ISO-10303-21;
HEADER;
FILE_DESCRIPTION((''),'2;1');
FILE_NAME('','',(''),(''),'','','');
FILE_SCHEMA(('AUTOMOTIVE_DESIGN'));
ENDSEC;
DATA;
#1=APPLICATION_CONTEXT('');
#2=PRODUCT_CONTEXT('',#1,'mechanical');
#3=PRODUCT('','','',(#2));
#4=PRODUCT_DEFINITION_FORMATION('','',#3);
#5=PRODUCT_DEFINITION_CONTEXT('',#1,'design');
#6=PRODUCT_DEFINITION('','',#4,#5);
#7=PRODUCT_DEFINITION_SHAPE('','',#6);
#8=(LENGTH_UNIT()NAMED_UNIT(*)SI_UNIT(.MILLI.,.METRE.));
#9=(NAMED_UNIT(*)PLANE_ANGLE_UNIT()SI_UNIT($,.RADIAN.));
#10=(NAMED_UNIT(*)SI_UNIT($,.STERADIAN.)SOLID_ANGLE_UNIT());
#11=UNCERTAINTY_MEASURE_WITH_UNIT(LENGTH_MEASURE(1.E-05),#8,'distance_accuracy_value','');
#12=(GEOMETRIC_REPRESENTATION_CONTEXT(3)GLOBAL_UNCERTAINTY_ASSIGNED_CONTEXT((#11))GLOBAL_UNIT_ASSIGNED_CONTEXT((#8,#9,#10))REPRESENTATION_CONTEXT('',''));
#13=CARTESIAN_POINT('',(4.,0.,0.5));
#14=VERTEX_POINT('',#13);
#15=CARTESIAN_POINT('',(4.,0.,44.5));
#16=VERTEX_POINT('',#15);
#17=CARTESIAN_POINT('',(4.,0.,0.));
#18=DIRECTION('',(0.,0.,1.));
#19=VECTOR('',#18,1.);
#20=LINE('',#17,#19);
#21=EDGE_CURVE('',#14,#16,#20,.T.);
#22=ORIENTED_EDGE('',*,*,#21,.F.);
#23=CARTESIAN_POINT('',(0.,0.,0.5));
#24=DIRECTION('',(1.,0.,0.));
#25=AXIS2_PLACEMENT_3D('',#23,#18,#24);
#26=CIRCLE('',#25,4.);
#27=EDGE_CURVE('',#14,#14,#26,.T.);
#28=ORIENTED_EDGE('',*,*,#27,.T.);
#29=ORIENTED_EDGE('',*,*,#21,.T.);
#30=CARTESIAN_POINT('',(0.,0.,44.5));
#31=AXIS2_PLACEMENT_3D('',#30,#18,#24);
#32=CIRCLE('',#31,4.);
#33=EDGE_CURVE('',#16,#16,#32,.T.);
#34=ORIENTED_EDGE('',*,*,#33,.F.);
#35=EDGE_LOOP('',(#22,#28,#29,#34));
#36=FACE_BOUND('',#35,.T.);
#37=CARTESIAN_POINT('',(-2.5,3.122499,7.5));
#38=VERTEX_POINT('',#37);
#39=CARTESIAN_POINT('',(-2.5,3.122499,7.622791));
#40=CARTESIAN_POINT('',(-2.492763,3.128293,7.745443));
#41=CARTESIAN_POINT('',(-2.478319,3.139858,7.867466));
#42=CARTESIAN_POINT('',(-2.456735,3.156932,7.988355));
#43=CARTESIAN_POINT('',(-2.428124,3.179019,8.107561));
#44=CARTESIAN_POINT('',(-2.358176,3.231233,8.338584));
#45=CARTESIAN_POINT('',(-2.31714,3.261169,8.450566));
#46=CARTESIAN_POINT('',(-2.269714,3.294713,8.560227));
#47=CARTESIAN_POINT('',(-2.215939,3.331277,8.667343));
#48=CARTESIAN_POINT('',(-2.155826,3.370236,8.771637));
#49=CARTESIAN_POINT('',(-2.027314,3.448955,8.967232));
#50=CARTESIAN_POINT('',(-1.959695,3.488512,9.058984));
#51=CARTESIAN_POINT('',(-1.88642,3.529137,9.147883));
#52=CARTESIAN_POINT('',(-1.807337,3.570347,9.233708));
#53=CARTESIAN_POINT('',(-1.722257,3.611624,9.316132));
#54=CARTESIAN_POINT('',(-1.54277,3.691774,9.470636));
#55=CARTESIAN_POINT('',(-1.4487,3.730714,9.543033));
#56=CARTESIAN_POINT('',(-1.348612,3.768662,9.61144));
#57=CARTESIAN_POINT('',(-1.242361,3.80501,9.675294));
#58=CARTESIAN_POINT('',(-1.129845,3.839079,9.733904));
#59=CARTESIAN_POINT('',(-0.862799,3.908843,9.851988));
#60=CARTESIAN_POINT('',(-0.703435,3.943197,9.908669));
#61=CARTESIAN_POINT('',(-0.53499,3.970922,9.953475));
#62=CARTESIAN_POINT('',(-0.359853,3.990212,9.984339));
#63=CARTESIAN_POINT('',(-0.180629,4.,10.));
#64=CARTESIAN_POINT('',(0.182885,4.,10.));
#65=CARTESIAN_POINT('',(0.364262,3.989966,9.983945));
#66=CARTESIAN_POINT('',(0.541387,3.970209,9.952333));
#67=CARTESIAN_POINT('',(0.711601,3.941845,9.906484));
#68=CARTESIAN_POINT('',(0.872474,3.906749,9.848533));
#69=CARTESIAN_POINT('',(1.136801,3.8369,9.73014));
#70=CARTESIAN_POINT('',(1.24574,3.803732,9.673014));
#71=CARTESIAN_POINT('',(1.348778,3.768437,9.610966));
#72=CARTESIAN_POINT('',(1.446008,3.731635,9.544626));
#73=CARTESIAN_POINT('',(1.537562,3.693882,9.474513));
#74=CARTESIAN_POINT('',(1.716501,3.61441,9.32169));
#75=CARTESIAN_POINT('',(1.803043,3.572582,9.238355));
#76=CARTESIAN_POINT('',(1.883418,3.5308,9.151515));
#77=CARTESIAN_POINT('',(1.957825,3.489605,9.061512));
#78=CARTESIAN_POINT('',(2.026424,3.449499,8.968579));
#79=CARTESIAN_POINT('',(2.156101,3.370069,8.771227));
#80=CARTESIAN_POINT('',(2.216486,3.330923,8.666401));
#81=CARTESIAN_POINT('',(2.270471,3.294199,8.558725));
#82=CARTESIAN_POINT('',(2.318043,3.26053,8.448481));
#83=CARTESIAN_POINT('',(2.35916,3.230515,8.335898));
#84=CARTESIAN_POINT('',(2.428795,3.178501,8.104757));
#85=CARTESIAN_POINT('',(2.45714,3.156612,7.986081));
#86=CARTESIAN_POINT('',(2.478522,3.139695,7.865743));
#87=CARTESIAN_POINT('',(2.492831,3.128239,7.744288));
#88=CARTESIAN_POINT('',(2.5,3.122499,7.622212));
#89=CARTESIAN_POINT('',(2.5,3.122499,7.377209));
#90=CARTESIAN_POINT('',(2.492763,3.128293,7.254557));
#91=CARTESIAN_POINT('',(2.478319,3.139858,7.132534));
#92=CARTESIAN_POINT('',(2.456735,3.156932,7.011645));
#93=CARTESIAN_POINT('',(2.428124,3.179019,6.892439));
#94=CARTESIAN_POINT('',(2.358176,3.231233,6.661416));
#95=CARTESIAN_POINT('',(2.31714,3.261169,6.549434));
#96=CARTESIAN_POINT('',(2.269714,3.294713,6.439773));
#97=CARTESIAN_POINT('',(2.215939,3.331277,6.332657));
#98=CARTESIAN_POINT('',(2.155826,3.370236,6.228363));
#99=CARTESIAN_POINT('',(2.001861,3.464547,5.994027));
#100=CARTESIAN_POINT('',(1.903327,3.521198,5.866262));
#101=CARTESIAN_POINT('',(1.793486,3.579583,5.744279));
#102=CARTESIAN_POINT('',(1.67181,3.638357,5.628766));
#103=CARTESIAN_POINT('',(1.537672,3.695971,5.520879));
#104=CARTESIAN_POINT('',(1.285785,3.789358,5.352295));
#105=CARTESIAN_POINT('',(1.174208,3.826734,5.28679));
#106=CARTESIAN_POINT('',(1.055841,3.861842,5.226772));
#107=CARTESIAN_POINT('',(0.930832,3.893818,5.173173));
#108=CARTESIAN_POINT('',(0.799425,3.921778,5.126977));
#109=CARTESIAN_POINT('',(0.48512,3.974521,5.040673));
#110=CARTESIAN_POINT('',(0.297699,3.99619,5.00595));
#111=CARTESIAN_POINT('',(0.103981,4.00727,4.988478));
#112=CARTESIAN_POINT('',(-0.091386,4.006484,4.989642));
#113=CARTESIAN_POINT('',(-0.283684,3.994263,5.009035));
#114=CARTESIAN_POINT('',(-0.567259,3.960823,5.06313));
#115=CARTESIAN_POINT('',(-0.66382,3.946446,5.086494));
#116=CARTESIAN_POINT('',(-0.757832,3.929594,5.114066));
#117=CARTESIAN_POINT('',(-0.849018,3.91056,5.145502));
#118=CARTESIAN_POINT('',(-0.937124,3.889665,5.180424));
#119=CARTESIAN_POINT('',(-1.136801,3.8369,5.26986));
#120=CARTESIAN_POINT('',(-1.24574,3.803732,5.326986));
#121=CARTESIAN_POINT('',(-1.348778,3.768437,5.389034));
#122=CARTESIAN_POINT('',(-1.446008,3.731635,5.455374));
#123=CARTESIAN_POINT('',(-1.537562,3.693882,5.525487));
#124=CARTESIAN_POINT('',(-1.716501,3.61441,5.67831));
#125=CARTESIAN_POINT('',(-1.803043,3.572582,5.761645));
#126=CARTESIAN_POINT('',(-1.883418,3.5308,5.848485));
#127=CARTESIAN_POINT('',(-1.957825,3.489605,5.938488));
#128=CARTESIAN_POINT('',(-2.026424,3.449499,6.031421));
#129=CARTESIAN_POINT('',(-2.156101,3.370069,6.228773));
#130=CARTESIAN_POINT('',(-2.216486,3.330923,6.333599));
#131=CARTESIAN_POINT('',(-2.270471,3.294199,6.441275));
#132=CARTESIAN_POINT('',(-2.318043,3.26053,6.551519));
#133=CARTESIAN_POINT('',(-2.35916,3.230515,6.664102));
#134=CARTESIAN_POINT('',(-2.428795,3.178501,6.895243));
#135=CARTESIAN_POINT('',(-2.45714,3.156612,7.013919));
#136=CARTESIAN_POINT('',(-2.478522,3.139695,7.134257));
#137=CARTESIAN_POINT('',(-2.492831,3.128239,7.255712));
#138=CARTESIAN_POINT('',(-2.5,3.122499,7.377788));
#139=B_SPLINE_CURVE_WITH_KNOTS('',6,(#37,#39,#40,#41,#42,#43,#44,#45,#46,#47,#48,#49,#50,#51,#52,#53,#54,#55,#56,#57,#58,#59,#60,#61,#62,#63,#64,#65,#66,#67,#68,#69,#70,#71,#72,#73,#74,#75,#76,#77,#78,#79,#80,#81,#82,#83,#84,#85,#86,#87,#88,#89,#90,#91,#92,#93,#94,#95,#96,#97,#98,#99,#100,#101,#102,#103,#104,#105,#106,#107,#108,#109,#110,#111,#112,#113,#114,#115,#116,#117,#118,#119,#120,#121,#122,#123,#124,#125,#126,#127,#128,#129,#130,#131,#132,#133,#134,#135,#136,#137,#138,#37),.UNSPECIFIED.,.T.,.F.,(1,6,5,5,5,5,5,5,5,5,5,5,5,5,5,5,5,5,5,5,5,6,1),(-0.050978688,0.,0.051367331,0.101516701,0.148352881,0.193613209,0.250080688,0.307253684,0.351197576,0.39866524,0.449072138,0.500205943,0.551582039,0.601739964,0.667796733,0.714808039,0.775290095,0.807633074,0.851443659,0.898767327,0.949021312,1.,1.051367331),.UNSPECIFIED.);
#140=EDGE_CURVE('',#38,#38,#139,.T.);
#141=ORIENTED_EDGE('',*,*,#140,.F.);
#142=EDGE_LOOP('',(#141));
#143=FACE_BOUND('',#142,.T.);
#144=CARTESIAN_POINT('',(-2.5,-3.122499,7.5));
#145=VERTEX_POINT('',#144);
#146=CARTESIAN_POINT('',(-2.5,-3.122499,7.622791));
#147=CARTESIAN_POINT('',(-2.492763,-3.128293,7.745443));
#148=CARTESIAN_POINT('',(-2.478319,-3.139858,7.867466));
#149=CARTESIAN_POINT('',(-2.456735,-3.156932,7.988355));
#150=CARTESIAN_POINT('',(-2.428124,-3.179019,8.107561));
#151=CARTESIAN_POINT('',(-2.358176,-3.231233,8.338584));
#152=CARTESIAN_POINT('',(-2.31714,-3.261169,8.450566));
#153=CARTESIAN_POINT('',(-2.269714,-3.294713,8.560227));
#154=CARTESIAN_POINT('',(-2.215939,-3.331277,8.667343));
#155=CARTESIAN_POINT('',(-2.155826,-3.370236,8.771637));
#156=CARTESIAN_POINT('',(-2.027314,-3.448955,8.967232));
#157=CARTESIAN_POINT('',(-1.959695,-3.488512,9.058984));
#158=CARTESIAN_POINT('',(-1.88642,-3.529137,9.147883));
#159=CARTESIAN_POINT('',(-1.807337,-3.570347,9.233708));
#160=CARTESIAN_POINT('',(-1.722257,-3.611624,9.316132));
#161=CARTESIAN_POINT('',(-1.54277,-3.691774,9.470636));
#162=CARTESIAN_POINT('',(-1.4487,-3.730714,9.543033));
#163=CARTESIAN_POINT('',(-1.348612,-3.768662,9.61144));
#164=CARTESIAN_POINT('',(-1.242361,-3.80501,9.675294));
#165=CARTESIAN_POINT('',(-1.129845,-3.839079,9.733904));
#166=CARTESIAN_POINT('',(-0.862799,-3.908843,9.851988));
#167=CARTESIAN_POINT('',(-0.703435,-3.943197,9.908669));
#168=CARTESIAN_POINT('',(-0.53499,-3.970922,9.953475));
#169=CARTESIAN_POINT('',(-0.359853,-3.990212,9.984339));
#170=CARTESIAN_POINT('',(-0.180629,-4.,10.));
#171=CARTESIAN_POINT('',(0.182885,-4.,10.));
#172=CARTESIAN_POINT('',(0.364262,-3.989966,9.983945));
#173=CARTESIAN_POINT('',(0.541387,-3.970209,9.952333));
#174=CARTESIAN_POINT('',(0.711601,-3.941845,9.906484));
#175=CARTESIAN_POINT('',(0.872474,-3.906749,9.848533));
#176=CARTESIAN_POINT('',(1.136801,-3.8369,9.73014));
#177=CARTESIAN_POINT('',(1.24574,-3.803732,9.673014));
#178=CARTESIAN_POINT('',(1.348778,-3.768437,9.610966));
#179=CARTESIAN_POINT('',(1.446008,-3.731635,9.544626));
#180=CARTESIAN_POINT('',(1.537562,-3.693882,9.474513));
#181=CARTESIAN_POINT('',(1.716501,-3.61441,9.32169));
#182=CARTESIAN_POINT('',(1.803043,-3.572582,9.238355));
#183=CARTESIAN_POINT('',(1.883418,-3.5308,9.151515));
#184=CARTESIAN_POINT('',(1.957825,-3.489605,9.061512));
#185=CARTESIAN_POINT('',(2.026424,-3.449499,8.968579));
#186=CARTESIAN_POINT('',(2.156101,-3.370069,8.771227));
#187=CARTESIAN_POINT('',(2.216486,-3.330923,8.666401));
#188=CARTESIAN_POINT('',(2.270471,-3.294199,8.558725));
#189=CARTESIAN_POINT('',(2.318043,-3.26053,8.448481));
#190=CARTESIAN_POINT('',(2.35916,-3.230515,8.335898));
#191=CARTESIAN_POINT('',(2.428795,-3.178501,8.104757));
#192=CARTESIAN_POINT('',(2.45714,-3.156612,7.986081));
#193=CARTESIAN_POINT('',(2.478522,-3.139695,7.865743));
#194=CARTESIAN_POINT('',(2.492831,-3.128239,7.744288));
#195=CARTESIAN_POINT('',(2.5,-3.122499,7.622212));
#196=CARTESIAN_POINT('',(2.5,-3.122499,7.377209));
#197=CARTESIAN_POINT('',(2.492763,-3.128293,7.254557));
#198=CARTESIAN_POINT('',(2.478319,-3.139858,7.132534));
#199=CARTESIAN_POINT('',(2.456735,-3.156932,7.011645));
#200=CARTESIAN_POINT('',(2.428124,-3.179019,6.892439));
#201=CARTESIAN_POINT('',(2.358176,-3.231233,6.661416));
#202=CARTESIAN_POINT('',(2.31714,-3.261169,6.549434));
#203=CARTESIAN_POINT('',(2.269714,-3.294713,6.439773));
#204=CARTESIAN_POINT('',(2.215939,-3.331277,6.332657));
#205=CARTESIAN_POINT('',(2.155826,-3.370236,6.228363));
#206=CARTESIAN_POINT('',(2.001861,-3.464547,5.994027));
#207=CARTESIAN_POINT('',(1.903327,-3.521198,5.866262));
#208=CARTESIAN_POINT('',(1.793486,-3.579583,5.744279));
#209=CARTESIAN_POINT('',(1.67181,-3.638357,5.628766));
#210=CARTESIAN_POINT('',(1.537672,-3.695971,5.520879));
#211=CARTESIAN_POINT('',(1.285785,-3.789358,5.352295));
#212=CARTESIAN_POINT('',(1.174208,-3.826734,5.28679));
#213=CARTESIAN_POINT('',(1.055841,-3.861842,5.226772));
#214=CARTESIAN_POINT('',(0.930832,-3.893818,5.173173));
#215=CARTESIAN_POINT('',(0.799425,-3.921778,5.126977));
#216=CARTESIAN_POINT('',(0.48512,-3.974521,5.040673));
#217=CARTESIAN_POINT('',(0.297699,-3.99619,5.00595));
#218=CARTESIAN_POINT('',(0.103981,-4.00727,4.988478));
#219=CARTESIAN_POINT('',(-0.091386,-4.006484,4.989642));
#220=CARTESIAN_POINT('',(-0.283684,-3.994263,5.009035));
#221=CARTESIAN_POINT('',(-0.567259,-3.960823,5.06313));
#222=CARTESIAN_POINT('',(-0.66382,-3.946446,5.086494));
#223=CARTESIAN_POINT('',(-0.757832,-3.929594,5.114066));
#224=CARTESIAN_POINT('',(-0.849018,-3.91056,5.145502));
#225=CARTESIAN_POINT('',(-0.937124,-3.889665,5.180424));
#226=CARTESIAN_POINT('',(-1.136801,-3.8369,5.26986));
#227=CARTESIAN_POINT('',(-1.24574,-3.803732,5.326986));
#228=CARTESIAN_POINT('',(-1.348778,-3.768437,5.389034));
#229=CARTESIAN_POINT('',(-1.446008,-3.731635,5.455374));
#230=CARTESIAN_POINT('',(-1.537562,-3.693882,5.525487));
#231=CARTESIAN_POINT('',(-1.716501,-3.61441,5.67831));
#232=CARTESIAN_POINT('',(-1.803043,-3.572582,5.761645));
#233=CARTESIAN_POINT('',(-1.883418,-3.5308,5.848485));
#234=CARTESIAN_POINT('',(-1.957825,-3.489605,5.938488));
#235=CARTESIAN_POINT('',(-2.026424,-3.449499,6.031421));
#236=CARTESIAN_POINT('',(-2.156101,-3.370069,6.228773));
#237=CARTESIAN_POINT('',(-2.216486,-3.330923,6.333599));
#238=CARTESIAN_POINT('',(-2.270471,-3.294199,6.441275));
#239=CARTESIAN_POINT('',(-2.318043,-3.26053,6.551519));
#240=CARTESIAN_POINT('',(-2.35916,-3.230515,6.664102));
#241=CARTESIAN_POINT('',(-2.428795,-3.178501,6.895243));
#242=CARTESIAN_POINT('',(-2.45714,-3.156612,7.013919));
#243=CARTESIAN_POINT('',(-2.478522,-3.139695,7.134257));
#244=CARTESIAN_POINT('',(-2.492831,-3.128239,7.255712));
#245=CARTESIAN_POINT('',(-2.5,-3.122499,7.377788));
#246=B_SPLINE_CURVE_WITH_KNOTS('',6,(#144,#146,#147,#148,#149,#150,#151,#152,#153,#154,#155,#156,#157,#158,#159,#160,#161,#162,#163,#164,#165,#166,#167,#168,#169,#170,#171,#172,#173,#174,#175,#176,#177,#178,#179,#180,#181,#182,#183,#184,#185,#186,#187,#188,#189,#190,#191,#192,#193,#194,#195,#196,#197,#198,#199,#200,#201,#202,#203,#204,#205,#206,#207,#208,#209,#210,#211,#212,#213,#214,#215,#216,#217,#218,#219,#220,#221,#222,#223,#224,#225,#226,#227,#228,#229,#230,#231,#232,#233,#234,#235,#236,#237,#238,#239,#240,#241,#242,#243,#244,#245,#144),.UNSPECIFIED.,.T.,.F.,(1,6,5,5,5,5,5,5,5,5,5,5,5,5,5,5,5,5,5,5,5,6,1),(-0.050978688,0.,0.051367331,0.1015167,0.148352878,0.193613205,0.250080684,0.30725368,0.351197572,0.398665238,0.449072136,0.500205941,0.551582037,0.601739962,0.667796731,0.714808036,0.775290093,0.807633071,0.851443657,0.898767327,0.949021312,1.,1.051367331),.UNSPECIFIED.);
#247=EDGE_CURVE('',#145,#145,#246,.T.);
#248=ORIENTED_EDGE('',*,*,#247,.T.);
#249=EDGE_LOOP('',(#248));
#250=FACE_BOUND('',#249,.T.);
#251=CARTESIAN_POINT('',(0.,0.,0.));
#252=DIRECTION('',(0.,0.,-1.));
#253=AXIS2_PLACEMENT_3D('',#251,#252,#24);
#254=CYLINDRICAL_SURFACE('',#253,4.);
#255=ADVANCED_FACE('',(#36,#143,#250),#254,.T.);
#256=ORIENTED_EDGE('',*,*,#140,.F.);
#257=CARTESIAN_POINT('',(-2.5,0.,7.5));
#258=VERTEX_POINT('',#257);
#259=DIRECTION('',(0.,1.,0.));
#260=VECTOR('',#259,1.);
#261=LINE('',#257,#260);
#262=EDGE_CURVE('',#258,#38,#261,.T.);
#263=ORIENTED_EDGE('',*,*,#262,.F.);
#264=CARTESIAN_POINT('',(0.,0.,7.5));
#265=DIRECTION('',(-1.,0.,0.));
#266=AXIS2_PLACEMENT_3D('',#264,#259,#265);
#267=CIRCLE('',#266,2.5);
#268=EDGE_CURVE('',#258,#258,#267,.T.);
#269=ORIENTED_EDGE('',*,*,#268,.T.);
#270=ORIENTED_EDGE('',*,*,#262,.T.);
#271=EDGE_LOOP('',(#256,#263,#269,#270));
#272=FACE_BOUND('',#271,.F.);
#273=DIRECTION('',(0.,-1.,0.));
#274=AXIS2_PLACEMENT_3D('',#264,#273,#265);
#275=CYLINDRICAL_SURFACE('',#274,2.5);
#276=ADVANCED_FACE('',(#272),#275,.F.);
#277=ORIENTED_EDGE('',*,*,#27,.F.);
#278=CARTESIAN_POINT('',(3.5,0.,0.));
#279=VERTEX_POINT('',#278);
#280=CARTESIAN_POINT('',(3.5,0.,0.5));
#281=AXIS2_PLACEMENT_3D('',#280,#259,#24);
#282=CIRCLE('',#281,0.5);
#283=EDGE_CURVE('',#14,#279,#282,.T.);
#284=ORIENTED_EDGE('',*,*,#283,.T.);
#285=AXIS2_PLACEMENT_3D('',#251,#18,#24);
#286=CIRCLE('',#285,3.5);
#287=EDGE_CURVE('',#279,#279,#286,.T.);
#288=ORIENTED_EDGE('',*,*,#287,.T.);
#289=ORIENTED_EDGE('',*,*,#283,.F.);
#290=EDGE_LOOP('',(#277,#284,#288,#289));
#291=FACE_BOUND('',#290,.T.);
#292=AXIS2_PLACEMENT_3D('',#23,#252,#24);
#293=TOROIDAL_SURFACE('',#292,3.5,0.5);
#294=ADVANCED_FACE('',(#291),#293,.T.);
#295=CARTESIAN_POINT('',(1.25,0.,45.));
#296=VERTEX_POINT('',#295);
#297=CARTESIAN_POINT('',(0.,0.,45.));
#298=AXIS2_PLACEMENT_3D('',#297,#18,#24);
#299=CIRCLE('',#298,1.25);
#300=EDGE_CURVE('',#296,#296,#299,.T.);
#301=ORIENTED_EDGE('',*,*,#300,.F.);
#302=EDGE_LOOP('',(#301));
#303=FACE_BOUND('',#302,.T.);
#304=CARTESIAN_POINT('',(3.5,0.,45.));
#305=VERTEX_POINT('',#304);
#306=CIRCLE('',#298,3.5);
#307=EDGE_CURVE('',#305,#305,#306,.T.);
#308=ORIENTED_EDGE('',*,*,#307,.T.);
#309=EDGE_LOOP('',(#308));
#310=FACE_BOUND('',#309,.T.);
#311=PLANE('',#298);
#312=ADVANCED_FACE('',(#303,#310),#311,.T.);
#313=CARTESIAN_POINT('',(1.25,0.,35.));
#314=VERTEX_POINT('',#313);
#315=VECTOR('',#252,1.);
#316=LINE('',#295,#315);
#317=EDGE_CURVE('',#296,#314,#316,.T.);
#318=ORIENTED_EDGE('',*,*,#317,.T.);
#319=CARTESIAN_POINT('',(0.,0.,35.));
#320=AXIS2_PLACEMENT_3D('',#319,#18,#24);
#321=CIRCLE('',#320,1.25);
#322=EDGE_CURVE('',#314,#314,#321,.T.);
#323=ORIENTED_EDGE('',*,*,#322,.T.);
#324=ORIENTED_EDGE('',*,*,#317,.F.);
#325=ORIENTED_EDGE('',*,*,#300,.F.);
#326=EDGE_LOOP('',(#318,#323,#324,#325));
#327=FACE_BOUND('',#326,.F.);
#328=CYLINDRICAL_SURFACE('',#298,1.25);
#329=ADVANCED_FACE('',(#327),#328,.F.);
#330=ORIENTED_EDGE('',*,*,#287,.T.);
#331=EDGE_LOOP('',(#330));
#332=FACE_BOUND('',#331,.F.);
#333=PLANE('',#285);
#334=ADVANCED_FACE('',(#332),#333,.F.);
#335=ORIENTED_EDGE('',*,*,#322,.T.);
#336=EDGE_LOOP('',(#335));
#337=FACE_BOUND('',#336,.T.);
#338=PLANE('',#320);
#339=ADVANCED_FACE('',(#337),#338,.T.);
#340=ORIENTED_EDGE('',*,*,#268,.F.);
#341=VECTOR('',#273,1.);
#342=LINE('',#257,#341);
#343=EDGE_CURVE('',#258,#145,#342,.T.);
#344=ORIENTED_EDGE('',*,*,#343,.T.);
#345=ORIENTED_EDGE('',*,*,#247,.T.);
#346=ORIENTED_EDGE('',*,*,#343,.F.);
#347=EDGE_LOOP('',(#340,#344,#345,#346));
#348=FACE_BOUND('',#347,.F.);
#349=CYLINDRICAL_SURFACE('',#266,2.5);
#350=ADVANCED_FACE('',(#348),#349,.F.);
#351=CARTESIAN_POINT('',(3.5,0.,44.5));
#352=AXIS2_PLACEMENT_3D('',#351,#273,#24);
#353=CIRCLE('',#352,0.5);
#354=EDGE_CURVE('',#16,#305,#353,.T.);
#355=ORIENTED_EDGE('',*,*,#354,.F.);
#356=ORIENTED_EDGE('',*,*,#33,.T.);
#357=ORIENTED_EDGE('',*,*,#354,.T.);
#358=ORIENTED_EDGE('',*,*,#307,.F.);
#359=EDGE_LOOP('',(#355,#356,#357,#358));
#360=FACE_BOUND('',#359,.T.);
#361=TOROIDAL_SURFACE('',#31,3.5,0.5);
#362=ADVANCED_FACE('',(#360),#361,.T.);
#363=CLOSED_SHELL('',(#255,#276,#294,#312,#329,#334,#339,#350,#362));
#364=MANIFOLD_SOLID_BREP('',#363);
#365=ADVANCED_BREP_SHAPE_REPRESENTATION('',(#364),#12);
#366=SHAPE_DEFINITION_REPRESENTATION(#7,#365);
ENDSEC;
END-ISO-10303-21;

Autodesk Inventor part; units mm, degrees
ref_plane "YZ Plane" through (0, 0, 0) normal (1, 0, 0) x (0, 1, 0)
ref_plane "XZ Plane" through (0, 0, 0) normal (0, 1, 0) x (-1, 0, 0)
ref_plane "XY Plane" through (0, 0, 0) normal (0, 0, 1) x (1, 0, 0)
sketch "Sketch1" plane through (0, 0, 0) normal (0, 0, 1) x (1, 0, 0)
  circle A0 centre (0, 0) radius 4
  dimension "d0" = 8
extrude "Extrusion1" add sketch "Sketch1" along normal blind 45
sketch "Sketch2" plane through (0, 0, 45) normal (0, 0, 1) x (1, 0, 0)
  circle A0 centre (0, 0) radius 1.25
  circle A1 centre (0, 0) radius 4 projected
  dimension "d3" = 2.5
extrude "Extrusion2" cut sketch "Sketch2" against normal blind 10 contours A0
sketch "Sketch3" plane through (0, 0, 0) normal (0, 1, 0) x (-1, 0, 0)
  circle A0 centre (0, 7.5) radius 2.5
  line L0 (4, 0) -> (-4, 0) projected
  point P0 (0, 0)
  dimension "d6" = 5
  dimension "d7" = 7.5
extrude "Extrusion3" cut sketch "Sketch3" along normal mid plane 10
thread "Thread1" size "M8x1.25" class "6g" standard "ANSI Metric M Profile" length 30 offset 15
fillet "Fillet1" radius 0.5 1 edges at (-4, 0, 45)
fillet "Fillet2" radius 0.5 1 edges at (-4, 0, 0)
properties part number "Drivescrew"
